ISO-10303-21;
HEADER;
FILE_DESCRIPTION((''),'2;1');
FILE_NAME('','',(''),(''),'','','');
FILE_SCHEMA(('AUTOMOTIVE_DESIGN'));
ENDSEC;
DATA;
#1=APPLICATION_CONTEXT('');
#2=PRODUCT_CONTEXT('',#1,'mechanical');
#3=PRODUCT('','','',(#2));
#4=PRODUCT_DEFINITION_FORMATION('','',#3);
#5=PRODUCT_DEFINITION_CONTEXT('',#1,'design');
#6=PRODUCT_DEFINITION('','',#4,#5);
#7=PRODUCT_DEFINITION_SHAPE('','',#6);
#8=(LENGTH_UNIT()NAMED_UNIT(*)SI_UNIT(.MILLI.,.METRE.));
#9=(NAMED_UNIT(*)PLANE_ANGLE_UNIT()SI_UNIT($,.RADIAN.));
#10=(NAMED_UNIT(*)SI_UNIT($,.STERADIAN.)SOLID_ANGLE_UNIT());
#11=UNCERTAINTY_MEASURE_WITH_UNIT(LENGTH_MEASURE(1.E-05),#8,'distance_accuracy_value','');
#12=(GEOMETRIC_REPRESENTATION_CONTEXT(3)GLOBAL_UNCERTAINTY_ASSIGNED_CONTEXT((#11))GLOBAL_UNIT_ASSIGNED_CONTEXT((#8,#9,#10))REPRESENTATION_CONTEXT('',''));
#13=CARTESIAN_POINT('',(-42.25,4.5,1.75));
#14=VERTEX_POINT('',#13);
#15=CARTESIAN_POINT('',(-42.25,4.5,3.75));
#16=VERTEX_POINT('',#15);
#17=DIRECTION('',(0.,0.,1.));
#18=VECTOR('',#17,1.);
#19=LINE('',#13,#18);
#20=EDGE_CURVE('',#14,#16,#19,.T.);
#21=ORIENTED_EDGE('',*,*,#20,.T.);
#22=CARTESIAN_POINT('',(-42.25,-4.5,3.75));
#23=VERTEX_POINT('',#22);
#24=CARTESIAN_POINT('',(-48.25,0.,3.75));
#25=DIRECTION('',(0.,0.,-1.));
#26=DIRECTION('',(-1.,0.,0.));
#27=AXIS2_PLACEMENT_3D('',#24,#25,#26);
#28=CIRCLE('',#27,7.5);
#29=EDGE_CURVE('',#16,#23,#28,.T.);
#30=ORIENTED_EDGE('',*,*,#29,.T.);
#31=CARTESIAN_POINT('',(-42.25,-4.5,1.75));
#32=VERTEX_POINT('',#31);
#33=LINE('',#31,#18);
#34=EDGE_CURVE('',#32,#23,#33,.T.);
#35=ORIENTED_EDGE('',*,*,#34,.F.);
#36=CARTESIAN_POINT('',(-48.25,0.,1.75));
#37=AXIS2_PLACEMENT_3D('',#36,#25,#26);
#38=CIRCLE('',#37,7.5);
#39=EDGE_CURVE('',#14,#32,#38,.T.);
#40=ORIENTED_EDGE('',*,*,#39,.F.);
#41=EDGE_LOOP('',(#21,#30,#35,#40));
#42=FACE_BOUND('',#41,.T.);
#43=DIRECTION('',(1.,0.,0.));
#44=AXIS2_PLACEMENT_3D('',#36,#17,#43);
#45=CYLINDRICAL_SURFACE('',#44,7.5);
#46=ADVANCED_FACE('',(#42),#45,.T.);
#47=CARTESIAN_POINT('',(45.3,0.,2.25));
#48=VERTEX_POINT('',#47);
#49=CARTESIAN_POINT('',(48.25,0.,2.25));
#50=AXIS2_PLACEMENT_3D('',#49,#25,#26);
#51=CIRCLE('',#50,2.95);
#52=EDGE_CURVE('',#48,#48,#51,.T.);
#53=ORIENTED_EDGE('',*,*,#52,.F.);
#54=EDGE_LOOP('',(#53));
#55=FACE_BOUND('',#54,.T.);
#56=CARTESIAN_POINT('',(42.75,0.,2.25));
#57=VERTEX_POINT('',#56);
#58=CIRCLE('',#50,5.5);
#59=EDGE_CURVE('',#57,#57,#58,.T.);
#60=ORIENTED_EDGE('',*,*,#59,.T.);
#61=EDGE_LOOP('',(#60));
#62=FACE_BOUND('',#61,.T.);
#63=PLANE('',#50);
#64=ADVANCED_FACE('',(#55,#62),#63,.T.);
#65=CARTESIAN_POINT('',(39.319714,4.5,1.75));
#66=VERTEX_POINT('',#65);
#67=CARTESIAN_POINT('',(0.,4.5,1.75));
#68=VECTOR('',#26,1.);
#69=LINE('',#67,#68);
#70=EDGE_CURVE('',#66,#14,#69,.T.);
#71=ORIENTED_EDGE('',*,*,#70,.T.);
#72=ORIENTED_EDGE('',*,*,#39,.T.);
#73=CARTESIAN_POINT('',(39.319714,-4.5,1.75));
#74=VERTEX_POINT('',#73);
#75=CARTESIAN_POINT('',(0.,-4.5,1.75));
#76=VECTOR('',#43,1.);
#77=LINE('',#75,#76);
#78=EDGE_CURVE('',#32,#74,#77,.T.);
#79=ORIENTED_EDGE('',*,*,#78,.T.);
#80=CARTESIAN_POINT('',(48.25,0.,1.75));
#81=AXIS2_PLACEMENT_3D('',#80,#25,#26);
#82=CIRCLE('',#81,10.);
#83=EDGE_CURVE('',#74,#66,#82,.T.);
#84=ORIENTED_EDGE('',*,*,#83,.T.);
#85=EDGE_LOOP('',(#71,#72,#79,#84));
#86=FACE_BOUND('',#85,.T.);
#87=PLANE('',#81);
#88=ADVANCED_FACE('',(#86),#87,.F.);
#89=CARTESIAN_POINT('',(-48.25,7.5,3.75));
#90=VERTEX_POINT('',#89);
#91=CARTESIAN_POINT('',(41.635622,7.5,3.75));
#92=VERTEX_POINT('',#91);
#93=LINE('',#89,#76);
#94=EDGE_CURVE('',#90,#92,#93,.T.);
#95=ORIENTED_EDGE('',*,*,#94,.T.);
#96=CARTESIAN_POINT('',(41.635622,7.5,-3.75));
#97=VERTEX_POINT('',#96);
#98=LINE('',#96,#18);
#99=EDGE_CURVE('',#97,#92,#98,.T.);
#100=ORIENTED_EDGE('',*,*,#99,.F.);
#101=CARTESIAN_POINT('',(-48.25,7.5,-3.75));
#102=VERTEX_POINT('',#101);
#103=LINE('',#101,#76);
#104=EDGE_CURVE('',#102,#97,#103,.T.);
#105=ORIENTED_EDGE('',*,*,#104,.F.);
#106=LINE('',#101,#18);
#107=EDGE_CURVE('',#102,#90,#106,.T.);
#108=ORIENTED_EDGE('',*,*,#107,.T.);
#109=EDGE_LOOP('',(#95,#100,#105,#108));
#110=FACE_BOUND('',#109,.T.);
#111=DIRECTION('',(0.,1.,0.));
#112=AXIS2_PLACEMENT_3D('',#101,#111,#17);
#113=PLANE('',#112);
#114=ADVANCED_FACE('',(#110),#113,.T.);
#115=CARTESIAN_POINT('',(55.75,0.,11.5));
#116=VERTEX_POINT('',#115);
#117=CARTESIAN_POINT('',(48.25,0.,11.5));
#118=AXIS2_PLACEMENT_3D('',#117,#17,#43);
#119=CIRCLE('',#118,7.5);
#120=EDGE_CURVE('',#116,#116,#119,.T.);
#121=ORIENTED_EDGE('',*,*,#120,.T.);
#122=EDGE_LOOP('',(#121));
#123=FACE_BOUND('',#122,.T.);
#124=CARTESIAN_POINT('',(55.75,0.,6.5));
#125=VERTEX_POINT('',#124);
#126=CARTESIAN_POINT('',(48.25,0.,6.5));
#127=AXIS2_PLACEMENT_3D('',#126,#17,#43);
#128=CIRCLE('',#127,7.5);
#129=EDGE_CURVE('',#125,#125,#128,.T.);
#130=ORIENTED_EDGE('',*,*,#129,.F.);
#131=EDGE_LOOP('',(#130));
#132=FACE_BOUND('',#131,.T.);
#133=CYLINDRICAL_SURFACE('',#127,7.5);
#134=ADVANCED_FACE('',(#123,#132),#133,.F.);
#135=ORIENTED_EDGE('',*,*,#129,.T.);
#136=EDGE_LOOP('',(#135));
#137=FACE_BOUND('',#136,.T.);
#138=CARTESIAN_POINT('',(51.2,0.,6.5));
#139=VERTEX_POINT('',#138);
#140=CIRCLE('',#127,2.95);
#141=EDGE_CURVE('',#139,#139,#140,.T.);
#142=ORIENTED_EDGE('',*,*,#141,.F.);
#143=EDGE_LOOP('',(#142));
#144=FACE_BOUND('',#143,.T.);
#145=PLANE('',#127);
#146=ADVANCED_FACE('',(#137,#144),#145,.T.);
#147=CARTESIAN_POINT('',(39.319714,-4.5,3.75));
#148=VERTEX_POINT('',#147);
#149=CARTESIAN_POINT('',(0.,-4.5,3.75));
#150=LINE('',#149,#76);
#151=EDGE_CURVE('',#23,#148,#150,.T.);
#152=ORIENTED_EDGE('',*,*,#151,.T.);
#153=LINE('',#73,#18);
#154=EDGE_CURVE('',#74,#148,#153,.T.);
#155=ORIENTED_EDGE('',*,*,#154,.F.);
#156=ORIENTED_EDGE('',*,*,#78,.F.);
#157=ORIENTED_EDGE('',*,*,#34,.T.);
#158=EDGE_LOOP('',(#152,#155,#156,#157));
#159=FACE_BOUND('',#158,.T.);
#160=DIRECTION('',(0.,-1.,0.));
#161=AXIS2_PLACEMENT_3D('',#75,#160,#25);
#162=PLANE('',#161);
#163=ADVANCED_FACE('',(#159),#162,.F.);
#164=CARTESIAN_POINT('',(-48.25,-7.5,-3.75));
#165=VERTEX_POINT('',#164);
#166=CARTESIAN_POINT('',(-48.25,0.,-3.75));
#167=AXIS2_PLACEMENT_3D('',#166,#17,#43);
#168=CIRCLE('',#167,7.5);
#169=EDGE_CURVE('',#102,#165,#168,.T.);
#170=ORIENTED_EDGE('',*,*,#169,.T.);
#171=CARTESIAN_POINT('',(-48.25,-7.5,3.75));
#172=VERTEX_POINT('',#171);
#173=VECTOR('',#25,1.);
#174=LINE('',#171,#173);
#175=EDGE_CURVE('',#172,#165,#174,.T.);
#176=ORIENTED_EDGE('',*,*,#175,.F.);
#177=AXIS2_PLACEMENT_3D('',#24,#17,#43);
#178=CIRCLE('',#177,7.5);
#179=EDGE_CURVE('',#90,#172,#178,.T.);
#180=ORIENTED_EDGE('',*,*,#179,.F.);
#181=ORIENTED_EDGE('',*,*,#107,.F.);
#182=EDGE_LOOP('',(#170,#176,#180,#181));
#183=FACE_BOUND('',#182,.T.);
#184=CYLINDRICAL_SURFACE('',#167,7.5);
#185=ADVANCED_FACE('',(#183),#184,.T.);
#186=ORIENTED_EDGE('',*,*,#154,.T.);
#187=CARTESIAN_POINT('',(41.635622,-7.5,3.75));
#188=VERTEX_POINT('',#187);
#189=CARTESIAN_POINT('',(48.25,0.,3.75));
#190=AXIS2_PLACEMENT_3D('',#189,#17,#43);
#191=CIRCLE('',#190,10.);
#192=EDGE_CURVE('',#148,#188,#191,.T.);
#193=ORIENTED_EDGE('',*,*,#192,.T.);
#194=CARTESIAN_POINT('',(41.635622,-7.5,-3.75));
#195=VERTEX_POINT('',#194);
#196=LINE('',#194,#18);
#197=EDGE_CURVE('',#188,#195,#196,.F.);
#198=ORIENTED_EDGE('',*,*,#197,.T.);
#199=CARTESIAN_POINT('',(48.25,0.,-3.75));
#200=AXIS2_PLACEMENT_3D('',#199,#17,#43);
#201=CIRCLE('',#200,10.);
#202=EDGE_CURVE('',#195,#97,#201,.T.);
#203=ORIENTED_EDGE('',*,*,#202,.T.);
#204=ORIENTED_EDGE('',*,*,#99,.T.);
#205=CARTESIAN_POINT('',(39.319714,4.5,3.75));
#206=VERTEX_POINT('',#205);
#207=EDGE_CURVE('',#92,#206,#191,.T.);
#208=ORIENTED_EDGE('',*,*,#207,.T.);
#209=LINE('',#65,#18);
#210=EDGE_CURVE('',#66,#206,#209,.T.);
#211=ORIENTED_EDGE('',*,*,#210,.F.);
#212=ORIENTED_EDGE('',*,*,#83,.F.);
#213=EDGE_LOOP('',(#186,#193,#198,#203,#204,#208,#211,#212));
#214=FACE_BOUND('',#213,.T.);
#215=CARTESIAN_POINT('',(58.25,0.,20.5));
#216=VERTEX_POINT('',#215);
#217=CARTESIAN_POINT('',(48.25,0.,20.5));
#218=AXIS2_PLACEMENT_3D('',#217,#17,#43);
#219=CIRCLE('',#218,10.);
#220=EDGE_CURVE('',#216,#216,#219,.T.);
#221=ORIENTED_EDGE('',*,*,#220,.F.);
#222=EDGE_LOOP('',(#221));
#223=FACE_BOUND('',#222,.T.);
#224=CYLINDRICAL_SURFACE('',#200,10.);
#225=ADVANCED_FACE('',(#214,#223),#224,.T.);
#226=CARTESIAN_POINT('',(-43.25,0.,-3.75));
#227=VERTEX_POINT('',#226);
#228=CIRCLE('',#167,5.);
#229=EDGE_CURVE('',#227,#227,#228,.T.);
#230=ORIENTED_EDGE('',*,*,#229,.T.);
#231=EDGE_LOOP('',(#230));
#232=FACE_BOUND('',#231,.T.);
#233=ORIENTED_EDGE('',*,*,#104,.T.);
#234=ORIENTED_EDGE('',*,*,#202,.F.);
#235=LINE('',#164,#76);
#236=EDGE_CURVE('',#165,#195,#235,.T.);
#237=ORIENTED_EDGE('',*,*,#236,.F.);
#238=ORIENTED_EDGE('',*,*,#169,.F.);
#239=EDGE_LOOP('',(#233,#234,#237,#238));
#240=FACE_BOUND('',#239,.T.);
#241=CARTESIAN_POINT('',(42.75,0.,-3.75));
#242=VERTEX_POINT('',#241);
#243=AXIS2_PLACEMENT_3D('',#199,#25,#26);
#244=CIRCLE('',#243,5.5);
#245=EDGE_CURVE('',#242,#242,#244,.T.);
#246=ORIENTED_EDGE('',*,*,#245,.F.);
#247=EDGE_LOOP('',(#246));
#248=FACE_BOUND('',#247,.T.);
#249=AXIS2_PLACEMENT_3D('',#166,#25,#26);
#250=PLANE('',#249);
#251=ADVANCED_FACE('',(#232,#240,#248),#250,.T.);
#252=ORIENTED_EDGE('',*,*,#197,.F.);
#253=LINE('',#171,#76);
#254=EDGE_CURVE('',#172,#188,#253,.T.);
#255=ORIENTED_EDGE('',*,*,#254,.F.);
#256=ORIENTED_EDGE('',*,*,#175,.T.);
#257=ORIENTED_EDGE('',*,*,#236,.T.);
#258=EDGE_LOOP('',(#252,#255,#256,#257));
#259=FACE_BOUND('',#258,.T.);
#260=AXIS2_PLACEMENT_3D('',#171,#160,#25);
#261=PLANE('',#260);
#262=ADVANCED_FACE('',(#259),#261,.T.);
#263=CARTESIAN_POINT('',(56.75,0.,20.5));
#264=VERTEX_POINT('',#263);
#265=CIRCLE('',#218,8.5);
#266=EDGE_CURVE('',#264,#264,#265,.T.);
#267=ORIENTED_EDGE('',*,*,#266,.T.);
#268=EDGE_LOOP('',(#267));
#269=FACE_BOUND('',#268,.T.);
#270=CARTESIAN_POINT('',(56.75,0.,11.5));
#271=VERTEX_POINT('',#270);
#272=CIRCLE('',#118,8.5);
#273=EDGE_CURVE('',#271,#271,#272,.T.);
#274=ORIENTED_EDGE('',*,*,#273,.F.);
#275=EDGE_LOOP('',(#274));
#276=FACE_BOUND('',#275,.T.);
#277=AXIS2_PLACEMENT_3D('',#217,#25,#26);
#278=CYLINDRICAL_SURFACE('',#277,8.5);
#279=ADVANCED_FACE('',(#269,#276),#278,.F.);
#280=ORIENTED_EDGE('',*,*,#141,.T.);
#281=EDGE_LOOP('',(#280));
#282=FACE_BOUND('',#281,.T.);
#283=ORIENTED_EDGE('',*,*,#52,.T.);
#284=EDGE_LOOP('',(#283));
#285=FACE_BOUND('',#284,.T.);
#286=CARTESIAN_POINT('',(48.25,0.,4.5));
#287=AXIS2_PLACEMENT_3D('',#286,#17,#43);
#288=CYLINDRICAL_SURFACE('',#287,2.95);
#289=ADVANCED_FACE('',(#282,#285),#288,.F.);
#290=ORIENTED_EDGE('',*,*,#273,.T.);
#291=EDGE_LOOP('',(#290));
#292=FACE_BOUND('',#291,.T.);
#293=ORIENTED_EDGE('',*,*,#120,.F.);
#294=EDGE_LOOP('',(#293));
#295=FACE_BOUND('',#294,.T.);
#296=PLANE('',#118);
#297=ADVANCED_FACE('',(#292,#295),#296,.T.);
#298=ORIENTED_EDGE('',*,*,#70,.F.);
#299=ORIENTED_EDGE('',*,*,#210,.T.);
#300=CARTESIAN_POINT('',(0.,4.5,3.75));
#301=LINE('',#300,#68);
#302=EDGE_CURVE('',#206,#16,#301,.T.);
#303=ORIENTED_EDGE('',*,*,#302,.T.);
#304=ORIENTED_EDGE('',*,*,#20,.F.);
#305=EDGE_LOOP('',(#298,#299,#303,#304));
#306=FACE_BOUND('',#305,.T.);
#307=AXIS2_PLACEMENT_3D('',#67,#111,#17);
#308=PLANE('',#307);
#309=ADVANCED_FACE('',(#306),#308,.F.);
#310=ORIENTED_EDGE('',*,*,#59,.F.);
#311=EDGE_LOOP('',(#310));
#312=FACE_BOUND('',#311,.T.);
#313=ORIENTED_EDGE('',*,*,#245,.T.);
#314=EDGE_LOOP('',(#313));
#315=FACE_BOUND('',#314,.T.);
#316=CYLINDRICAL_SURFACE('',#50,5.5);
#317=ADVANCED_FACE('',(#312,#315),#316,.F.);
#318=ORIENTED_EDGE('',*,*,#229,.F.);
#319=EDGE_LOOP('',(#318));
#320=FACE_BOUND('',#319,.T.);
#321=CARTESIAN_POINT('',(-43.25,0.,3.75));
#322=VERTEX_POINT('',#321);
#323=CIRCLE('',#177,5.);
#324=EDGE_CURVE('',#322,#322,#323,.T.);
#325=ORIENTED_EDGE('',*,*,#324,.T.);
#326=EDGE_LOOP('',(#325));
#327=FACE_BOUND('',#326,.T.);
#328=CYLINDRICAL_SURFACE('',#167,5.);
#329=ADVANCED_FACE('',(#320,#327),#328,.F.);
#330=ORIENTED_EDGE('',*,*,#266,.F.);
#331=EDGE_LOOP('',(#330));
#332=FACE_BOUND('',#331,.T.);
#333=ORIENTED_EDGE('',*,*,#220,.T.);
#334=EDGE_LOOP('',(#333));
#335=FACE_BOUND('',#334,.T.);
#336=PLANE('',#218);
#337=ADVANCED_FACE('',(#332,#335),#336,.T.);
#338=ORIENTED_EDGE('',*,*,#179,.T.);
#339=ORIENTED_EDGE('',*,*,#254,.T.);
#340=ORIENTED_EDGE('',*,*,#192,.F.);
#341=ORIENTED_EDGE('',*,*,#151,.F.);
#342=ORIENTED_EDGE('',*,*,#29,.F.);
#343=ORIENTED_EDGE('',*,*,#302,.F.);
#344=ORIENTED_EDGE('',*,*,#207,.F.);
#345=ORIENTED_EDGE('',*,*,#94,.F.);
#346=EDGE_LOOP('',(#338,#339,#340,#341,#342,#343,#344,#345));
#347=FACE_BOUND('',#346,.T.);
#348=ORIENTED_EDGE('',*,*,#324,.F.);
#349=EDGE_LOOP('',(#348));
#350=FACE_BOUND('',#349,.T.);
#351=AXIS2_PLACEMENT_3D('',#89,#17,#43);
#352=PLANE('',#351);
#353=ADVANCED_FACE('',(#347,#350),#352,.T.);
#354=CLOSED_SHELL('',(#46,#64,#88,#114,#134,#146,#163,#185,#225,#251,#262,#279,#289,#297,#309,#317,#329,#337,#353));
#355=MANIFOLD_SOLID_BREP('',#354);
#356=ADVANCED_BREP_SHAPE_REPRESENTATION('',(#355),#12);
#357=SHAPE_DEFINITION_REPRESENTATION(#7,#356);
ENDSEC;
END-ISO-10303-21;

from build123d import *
from build123d.topology import SkipClean

# Parameters (mm, degrees)
EXTRUDE_1_DEPTH          = 48.25
EXTRUDE_1_DEPTH_BACK     = 48.25
EXTRUDE_2_DEPTH          = 3.75
EXTRUDE_2_DEPTH_BACK     = 3.75
SKETCH_2_R               = 7.5
SKETCH_2_R_2             = 5
CUT_EXTRUDE_1_DEPTH      = 3.75
CUT_EXTRUDE_1_DEPTH_BACK = 3.75
SKETCH_3_R               = 5
EXTRUDE_3_DEPTH          = 11.5
EXTRUDE_3_DEPTH_BACK     = 3.75
SKETCH_4_R               = 10
CUT_EXTRUDE_4_DEPTH      = 2
SKETCH_9_R               = 7.5
CUT_EXTRUDE_5_DEPTH      = 5
EXTRUDE_START            = 9
SKETCH_10_R              = 10
SKETCH_10_R_2            = 8.5
EXTRUDE_5_DEPTH          = 9
SKETCH_11_R              = 2.95
CUT_EXTRUDE_6_DEPTH      = 2
SKETCH_12_R              = 5.5
CUT_EXTRUDE_7_DEPTH      = 6
CUT_EXTRUDE_START        = -6
SKETCH_13_R              = 2.95
CUT_EXTRUDE_8_DEPTH      = 6


with BuildPart() as part:
    # 草图1 → 凸台-拉伸1 (new, two sides: drawn at the far end of the back side and taken through both)
    with BuildSketch(Plane(origin=(0, 0, 0), x_dir=(0, 0, -1), z_dir=(1, 0, 0)).offset(-EXTRUDE_1_DEPTH_BACK)):
        Polygon((3.75, 0), (3.75, 7.5), (-3.75, 7.5), (-3.75, -7.5), (3.75, -7.5), align=None)
    extrude(amount=EXTRUDE_1_DEPTH + EXTRUDE_1_DEPTH_BACK)

    # 草图2 → 凸台-拉伸2 (add, two sides: drawn at the far end of the back side and taken through both)
    with BuildSketch(Plane.XY.offset(-EXTRUDE_2_DEPTH_BACK)):
        with Locations((-48.25, 0)):
            Circle(SKETCH_2_R)
        with Locations((-48.25, 0)):
            Circle(SKETCH_2_R_2, mode=Mode.SUBTRACT)
    extrude(amount=EXTRUDE_2_DEPTH + EXTRUDE_2_DEPTH_BACK)

    # 草图3 → 切除-拉伸1 (cut, two sides: drawn at the far end of the back side and taken through both)
    with BuildSketch(Plane.XY.offset(-CUT_EXTRUDE_1_DEPTH_BACK)):
        with Locations((-48.25, 0)):
            Circle(SKETCH_3_R)
    extrude(amount=CUT_EXTRUDE_1_DEPTH + CUT_EXTRUDE_1_DEPTH_BACK, mode=Mode.SUBTRACT)

    # 草图4 → 凸台-拉伸3 (add, two sides: drawn at the far end of the back side and taken through both)
    with BuildSketch(Plane.XY.offset(-EXTRUDE_3_DEPTH_BACK)):
        with Locations((48.25, 0)):
            Circle(SKETCH_4_R)
    extrude(amount=EXTRUDE_3_DEPTH + EXTRUDE_3_DEPTH_BACK)

    # 草图8 → 切除-拉伸4 (cut)
    with BuildSketch(Plane.XY.offset(3.75)):
        with BuildLine():
            Line((0, 4.5), (-42.25, 4.5))
            ThreePointArc((-42.25, 4.5), (-40.75, 0), (-42.25, -4.5))
            Line((-42.25, -4.5), (0, -4.5))
            Line((0, -4.5), (39.31971445, -4.5))
            ThreePointArc((39.31971445, -4.5), (38.25, 0), (39.31971445, 4.5))
            Line((39.31971445, 4.5), (0, 4.5))
        make_face()
    extrude(amount=-CUT_EXTRUDE_4_DEPTH, mode=Mode.SUBTRACT)

    # 草图9 → 切除-拉伸5 (cut)
    with BuildSketch(Plane.XY.offset(11.5)):
        with Locations((48.25, 0)):
            Circle(SKETCH_9_R)
    extrude(amount=-CUT_EXTRUDE_5_DEPTH, mode=Mode.SUBTRACT)

    # 草图10 → 凸台-拉伸5 (add)
    with SkipClean():  # the faces are left unmerged after this step: merging them gives an invalid solid
        with BuildSketch(Plane.XY.offset(11.5).offset(EXTRUDE_START)):
            with Locations((48.25, 0)):
                Circle(SKETCH_10_R)
            with Locations((48.25, 0)):
                Circle(SKETCH_10_R_2, mode=Mode.SUBTRACT)
        extrude(amount=-EXTRUDE_5_DEPTH)

    # 草图11 → 切除-拉伸6 (cut)
    with SkipClean():  # the faces are left unmerged after this step: merging them gives an invalid solid
        with BuildSketch(Plane.XY.offset(6.5)):
            with Locations((48.25, 0)):
                Circle(SKETCH_11_R)
        extrude(amount=-CUT_EXTRUDE_6_DEPTH, mode=Mode.SUBTRACT)

    # 草图12 → 切除-拉伸7 (cut)
    with SkipClean():  # the faces are left unmerged after this step: merging them gives an invalid solid
        with BuildSketch(Plane(origin=(0, 0, -3.75), x_dir=(-1, 0, 0), z_dir=(0, 0, -1))):
            with Locations((-48.25, 0)):
                Circle(SKETCH_12_R)
        extrude(amount=-CUT_EXTRUDE_7_DEPTH, mode=Mode.SUBTRACT)

    # 草图13 → 切除-拉伸8 (cut)
    with SkipClean():  # the faces are left unmerged after this step: merging them gives an invalid solid
        with BuildSketch(Plane(origin=(0, 0, 2.25), x_dir=(-1, 0, 0), z_dir=(0, 0, -1)).offset(CUT_EXTRUDE_START)):
            with Locations((-48.25, 0)):
                Circle(SKETCH_13_R)
        extrude(amount=CUT_EXTRUDE_8_DEPTH, mode=Mode.SUBTRACT)


solid = part.part
